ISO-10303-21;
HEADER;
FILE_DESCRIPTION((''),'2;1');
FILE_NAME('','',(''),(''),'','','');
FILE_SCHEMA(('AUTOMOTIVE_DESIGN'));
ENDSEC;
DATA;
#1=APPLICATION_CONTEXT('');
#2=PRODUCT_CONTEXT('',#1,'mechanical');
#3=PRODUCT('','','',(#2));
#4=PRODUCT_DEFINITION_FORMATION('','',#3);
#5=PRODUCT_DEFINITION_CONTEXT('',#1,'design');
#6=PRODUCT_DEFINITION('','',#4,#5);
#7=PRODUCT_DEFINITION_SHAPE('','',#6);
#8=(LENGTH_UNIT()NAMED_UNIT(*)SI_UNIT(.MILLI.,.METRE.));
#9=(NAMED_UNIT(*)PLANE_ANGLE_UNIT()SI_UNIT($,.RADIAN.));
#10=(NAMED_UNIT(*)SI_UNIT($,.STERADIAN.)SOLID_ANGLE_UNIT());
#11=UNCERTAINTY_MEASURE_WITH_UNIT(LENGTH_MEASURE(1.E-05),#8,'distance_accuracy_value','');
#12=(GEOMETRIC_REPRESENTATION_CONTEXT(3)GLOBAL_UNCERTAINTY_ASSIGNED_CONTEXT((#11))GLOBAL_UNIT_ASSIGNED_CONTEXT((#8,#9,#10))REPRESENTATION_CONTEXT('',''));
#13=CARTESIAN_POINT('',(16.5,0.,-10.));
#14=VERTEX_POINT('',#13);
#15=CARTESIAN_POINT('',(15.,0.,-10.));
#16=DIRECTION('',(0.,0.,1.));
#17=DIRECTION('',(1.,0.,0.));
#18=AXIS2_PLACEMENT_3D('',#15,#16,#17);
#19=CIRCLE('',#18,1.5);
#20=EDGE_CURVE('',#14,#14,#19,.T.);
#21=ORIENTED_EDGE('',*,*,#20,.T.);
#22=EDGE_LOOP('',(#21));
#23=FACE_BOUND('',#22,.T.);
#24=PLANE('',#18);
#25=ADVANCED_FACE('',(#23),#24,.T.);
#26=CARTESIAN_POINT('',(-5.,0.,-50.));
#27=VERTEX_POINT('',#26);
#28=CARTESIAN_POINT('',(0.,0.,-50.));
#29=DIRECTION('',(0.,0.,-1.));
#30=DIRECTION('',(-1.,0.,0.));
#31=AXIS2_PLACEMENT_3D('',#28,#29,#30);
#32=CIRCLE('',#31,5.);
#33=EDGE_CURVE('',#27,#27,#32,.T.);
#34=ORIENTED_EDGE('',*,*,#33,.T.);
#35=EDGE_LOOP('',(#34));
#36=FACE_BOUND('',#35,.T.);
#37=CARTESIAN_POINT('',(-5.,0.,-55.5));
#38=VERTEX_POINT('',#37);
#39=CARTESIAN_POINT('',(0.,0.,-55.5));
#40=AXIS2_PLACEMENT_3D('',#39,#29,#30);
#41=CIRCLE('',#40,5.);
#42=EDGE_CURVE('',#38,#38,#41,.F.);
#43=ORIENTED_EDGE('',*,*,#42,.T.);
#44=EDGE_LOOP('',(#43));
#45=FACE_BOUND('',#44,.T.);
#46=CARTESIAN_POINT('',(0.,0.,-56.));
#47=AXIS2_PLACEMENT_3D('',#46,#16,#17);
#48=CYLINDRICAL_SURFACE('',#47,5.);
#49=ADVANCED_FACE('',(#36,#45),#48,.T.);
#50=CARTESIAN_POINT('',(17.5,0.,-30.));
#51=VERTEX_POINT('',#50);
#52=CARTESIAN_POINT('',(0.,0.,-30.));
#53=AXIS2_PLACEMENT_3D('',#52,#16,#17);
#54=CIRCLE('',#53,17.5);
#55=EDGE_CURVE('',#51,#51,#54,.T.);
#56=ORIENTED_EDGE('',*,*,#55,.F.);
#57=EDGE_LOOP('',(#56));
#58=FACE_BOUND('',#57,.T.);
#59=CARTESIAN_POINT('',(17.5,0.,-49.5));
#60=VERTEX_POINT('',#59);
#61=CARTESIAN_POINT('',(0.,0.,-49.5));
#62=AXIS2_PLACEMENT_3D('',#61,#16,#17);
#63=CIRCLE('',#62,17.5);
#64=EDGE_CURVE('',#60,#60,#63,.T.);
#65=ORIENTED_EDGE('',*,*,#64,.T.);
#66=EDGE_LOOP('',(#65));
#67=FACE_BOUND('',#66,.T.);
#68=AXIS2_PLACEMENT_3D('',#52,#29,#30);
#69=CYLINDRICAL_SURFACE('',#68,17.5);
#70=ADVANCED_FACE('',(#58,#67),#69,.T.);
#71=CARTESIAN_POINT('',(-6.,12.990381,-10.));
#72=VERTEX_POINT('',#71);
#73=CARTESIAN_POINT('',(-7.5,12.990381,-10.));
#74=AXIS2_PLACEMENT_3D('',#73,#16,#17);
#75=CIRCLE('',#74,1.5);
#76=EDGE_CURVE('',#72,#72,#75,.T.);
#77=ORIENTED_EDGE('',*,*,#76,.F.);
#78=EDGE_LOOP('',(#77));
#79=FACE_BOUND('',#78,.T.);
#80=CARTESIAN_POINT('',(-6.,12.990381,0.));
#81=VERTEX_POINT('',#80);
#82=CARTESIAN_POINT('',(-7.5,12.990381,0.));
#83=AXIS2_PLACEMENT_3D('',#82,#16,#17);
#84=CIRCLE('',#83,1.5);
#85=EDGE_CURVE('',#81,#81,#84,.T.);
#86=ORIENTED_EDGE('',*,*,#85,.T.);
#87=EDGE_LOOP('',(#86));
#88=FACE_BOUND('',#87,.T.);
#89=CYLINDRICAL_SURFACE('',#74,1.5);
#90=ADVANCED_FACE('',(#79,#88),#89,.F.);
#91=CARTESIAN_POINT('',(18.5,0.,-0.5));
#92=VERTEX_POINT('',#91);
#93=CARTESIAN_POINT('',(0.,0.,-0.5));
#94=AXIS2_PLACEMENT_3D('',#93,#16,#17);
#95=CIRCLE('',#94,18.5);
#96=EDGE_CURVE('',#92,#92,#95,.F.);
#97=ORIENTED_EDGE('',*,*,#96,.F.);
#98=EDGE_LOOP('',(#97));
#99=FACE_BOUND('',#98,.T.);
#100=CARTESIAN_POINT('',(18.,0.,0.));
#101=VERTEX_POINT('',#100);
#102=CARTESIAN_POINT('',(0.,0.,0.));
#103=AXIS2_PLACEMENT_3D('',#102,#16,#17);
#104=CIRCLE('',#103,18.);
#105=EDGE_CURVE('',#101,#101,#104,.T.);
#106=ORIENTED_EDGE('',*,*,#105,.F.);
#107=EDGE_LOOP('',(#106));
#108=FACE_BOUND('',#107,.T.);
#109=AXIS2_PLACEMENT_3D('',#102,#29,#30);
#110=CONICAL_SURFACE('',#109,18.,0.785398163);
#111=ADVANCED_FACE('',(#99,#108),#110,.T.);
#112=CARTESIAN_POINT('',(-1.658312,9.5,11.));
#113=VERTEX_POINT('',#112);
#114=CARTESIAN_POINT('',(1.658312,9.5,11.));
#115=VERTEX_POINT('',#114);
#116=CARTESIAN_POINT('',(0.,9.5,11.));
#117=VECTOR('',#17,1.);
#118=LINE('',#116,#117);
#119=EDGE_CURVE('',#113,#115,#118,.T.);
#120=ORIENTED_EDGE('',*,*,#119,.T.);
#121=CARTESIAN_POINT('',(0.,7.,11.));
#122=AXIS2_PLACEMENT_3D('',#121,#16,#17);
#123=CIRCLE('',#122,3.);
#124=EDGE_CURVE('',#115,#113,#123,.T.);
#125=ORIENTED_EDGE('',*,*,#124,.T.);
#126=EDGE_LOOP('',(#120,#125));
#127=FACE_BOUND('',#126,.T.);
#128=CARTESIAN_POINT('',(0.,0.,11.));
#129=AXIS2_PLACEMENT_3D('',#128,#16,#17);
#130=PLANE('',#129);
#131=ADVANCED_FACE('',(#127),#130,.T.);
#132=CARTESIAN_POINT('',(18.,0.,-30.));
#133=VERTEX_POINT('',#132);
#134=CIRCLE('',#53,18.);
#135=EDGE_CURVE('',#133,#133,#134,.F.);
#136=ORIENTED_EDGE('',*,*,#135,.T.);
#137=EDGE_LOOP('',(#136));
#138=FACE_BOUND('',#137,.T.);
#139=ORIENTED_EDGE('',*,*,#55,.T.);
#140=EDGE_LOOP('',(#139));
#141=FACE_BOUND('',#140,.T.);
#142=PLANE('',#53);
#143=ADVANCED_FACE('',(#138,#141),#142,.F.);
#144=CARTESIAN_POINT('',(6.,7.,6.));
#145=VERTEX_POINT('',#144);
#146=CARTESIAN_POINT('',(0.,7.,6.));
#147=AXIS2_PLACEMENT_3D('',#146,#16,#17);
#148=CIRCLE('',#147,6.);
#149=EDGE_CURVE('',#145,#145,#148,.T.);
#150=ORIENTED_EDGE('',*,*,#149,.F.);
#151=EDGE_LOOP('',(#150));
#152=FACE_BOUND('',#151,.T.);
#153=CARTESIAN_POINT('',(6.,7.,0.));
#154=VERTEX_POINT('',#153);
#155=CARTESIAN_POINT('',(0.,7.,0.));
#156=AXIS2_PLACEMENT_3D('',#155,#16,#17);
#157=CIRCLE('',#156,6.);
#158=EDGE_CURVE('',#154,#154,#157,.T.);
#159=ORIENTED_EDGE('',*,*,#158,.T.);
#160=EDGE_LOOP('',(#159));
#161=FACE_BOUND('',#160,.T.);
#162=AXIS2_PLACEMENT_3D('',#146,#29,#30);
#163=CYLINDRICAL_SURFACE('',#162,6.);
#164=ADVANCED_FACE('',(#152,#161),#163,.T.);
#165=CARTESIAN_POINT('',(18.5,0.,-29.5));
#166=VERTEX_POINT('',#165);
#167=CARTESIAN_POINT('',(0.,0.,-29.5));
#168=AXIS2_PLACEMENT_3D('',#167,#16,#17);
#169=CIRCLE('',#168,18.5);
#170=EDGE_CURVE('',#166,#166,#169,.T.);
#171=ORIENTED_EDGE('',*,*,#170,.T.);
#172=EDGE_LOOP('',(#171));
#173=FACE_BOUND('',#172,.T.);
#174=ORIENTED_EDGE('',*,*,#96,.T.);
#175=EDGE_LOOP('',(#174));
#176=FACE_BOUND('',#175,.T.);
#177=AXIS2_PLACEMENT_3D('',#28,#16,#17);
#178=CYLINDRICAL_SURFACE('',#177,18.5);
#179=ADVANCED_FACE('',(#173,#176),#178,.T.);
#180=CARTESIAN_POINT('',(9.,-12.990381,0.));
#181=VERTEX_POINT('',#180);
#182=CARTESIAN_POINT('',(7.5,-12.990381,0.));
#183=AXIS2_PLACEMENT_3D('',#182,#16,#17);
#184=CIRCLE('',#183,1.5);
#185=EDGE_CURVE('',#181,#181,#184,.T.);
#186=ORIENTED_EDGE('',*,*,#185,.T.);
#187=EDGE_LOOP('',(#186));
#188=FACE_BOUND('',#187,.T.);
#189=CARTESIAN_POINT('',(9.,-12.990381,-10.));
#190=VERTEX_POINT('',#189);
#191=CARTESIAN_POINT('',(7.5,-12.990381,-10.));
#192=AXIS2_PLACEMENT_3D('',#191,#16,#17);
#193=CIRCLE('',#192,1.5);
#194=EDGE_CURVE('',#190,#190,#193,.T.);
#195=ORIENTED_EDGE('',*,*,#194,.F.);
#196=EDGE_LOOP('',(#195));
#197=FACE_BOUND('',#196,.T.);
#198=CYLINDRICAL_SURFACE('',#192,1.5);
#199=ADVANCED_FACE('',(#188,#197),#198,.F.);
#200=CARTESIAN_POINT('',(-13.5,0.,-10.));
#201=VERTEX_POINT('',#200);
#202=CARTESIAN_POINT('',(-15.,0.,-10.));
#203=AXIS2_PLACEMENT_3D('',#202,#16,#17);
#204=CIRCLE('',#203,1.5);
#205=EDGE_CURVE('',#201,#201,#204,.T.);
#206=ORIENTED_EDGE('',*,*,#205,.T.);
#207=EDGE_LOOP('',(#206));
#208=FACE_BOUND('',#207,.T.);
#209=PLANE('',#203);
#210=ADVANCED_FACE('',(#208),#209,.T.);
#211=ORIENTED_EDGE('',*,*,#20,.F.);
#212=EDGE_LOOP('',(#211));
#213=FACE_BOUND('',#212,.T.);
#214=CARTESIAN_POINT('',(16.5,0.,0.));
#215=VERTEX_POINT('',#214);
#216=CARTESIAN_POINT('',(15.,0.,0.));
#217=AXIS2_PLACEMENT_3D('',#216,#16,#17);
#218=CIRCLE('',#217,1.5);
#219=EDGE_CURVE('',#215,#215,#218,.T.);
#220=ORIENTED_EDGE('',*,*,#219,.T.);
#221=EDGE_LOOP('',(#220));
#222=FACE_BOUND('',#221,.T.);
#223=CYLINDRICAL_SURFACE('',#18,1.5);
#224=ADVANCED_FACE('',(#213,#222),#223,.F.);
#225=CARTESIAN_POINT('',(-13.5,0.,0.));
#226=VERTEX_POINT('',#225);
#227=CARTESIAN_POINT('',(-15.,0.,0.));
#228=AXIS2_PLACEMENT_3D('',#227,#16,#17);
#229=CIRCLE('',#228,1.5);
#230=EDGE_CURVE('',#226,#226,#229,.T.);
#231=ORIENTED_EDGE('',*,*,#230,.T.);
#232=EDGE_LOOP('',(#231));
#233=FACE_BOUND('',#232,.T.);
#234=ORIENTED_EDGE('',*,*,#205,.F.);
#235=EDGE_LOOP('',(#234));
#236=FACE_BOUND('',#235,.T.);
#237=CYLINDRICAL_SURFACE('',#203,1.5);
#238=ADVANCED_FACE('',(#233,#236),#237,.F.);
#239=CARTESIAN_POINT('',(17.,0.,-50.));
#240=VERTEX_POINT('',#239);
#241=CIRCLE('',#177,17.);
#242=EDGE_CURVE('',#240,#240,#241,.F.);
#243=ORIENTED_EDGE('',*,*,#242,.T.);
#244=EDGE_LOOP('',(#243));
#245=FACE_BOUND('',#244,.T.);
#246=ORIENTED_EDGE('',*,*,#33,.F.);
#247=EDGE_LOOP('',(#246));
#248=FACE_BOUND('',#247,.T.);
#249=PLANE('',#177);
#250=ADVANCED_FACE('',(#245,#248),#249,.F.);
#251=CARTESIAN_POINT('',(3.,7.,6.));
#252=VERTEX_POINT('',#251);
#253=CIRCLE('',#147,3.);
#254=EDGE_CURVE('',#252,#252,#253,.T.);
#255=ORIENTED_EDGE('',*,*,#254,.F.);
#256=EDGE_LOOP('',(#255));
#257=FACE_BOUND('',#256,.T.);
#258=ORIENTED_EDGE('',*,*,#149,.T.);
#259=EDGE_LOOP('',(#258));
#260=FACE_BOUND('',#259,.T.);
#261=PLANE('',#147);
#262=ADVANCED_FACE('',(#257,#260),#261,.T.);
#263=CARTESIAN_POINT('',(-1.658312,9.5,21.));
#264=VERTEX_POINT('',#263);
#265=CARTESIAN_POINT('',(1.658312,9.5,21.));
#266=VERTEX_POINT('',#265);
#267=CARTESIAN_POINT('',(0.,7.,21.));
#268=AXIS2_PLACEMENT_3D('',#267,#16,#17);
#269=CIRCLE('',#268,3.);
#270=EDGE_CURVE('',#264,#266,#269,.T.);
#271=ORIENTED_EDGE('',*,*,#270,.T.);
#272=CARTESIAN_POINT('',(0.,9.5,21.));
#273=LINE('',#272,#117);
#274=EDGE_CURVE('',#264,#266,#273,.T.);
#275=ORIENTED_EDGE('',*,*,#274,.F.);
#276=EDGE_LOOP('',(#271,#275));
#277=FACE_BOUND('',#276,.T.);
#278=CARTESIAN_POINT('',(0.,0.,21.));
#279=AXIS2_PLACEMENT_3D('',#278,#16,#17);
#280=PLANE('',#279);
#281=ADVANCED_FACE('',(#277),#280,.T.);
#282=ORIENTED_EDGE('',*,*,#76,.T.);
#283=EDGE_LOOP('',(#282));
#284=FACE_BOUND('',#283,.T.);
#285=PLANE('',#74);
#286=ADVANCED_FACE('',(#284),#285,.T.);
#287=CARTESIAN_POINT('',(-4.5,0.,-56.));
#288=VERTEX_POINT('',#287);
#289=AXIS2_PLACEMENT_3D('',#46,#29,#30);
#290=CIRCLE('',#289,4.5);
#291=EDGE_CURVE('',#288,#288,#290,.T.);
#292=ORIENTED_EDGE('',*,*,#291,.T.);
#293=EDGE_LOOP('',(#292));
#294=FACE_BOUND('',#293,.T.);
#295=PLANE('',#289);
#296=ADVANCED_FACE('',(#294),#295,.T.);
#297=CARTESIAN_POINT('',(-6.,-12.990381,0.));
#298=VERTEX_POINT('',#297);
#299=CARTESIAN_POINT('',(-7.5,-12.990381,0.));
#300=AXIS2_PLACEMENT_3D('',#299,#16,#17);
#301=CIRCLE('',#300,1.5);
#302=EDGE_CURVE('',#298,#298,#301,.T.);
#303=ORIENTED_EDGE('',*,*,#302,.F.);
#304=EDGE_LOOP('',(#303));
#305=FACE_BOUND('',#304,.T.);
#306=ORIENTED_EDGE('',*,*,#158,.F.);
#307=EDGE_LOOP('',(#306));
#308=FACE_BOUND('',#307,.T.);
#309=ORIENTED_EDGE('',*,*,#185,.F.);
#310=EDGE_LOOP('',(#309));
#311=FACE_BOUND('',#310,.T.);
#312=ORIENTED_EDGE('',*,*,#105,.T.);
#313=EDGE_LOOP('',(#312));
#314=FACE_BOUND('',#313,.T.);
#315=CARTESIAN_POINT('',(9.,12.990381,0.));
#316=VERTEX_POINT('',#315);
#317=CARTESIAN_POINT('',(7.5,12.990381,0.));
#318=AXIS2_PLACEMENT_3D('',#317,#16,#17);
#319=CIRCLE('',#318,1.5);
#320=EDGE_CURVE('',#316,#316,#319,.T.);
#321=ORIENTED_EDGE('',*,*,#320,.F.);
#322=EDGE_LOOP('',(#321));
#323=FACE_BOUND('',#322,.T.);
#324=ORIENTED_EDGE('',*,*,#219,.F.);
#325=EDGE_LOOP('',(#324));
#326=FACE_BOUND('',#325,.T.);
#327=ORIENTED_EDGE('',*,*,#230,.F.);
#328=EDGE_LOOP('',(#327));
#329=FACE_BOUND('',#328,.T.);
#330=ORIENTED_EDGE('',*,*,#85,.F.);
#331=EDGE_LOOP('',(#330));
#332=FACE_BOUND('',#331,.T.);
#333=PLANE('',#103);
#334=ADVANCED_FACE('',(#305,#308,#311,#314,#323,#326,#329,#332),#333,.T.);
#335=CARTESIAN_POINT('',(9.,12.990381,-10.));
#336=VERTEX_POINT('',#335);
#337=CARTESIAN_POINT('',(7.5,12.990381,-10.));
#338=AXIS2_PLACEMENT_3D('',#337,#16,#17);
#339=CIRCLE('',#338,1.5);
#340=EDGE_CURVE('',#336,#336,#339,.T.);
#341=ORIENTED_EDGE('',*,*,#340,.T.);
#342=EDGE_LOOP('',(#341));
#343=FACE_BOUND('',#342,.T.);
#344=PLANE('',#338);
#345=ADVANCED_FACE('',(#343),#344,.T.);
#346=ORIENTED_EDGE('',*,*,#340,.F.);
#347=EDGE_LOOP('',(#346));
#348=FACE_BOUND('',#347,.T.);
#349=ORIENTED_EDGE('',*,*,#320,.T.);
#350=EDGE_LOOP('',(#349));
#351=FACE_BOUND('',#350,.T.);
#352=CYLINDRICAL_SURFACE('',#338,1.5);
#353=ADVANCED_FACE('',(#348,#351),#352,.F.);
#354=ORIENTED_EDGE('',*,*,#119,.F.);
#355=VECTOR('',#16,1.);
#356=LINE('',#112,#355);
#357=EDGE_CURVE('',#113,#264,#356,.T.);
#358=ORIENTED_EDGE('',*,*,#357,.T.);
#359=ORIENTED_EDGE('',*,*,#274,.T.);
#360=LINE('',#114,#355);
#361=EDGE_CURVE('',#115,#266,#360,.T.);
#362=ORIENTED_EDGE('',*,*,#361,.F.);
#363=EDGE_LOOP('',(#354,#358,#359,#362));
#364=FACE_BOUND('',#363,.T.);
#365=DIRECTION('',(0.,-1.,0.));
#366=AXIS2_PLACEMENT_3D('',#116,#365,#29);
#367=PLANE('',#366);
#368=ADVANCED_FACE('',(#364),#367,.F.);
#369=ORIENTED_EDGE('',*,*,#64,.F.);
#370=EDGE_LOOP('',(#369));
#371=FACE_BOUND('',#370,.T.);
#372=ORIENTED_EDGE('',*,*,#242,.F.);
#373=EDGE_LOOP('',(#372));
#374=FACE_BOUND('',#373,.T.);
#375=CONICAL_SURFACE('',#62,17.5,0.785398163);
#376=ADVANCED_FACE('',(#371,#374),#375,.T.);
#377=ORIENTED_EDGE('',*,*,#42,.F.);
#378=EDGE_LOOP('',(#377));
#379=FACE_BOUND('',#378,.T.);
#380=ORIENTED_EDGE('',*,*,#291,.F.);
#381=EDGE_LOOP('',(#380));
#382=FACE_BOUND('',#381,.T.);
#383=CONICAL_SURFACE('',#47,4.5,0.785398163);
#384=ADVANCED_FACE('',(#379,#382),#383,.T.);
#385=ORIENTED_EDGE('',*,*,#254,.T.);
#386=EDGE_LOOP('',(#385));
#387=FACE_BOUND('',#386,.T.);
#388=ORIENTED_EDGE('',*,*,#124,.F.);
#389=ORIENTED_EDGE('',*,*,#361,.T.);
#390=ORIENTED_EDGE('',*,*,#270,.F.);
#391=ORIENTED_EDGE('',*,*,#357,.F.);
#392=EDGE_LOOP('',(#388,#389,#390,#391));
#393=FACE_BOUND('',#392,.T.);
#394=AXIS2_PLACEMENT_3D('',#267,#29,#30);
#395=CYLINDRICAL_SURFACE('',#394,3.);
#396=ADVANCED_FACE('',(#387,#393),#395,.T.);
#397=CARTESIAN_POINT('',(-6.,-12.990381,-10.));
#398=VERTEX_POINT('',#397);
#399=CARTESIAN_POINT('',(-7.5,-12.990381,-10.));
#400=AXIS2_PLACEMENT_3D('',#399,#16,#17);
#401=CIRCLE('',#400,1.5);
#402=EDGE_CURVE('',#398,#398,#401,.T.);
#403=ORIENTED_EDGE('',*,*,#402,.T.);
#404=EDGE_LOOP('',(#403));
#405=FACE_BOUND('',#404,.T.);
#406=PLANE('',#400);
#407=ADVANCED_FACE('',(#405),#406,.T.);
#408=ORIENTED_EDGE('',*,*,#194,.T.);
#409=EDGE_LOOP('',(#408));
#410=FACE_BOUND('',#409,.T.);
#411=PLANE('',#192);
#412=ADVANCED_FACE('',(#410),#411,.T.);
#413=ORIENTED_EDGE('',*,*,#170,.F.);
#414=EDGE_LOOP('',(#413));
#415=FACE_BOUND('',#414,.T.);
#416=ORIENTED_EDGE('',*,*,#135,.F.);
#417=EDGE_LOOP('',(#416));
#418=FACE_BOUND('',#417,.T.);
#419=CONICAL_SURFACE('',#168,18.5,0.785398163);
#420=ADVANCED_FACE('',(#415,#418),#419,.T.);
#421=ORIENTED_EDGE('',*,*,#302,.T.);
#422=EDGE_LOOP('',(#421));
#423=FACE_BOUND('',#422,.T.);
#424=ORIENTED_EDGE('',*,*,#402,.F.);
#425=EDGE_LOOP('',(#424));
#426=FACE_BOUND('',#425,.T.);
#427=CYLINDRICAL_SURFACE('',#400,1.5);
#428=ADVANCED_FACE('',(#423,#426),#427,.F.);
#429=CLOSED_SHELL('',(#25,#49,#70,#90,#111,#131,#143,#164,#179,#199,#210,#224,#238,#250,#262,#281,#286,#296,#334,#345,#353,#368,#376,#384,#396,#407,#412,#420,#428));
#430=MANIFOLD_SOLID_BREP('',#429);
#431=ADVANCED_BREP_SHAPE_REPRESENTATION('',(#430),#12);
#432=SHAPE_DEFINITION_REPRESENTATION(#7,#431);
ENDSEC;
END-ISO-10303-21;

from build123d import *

# Parameters (mm, degrees)
SKETCH_1_R          = 18.5
EXTRUDE_1_DEPTH     = 50
SKETCH_2_R          = 5
EXTRUDE_2_DEPTH     = 6
EXTRUDE_3_DEPTH     = 21
CUT_EXTRUDE_1_DEPTH = 10
SKETCH_5_R          = 6
EXTRUDE_4_DEPTH     = 6
CUT_EXTRUDE_START   = -30
CUT_EXTRUDE_2_DEPTH = 20
SKETCH_8_R          = 1.5
CUT_EXTRUDE_3_DEPTH = 10


with BuildPart() as part:
    # 草图1 → 凸台-拉伸1 (new body)
    with BuildSketch(Plane.XY):
        Circle(SKETCH_1_R)
    extrude(amount=-EXTRUDE_1_DEPTH)

    # 草图2 → 凸台-拉伸2 (add)
    with BuildSketch(Plane(origin=(0, 0, -50), x_dir=(-1, 0, 0), z_dir=(0, 0, -1))):
        Circle(SKETCH_2_R)
    extrude(amount=EXTRUDE_2_DEPTH)

    # 草图1<3> → 凸台-拉伸3 (add)
    with BuildSketch(Plane.XY):
        with BuildLine():
            ThreePointArc((0, 10), (-3, 7), (0, 4))
            Line((0, 4), (0, 10))
        make_face()
        with BuildLine():
            Line((0, 10), (0, 4))
            ThreePointArc((0, 4), (2.121320344, 4.878679656), (3, 7))
            ThreePointArc((3, 7), (2.121320344, 9.121320344), (0, 10))
        make_face()
    extrude(amount=EXTRUDE_3_DEPTH)

    # 草图4 → 切除-拉伸1 (cut)
    with BuildSketch(Plane.XY.offset(21)):
        Polygon((-80.661429966, 9.5), (-1.658312395, 9.5), (1.658312395, 9.5), (80.661429966, 9.5), (80.661429966, 167.506235142), (-80.661429966, 167.506235142), align=None)
    extrude(amount=-CUT_EXTRUDE_1_DEPTH, mode=Mode.SUBTRACT)

    # 草图5 → 凸台-拉伸4 (add)
    with BuildSketch(Plane.XY):
        with Locations((0, 7)):
            Circle(SKETCH_5_R)
    extrude(amount=EXTRUDE_4_DEPTH)

    # 草图1<5> → 切除-拉伸2 (cut)
    with BuildSketch(Plane.XY.offset(CUT_EXTRUDE_START)):
        with BuildLine():
            ThreePointArc((0, 18.5), (-18.5, 0), (0, -18.5))
            Line((0, -18.5), (0, -17.5))
            ThreePointArc((0, -17.5), (-17.5, 0), (0, 17.5))
            Line((0, 17.5), (0, 18.5))
        make_face()
        with BuildLine():
            Line((0, -17.5), (0, -18.5))
            ThreePointArc((0, -18.5), (13.081475452, -13.081475452), (18.5, 0))
            ThreePointArc((18.5, 0), (13.081475452, 13.081475452), (0, 18.5))
            Line((0, 18.5), (0, 17.5))
            ThreePointArc((0, 17.5), (12.374368671, 12.374368671), (17.5, 0))
            ThreePointArc((17.5, 0), (12.374368671, -12.374368671), (0, -17.5))
        make_face()
    extrude(amount=-CUT_EXTRUDE_2_DEPTH, mode=Mode.SUBTRACT)

    # 倒角1: read off the stored shape, not the designer's step
    # 倒角1 outline → 倒角1 (revolve, cut)
    with BuildSketch(Plane.XZ):
        Polygon((5, -55.5), (4.5, -56), (5, -56), align=None)
        Polygon((17.5, -49.5), (17, -50), (17.5, -50), align=None)
        Polygon((18.5, -29.5), (18, -30), (18.5, -30), align=None)
        Polygon((18, 0), (18.5, -0.5), (18.5, 0), align=None)
    revolve(axis=Axis((0, 0, 0), (0, 0, 1)), mode=Mode.SUBTRACT)

    # 草图8 → 切除-拉伸3 (cut)
    with BuildSketch(Plane.XY):
        with Locations((15, 0)):
            Circle(SKETCH_8_R)
        with Locations((7.5, -12.990381057)):
            Circle(SKETCH_8_R)
        with Locations((-7.5, -12.990381057)):
            Circle(SKETCH_8_R)
        with Locations((-15, 0)):
            Circle(SKETCH_8_R)
        with Locations((-7.5, 12.990381057)):
            Circle(SKETCH_8_R)
        with Locations((7.5, 12.990381057)):
            Circle(SKETCH_8_R)
    extrude(amount=-CUT_EXTRUDE_3_DEPTH, mode=Mode.SUBTRACT)


solid = part.part
